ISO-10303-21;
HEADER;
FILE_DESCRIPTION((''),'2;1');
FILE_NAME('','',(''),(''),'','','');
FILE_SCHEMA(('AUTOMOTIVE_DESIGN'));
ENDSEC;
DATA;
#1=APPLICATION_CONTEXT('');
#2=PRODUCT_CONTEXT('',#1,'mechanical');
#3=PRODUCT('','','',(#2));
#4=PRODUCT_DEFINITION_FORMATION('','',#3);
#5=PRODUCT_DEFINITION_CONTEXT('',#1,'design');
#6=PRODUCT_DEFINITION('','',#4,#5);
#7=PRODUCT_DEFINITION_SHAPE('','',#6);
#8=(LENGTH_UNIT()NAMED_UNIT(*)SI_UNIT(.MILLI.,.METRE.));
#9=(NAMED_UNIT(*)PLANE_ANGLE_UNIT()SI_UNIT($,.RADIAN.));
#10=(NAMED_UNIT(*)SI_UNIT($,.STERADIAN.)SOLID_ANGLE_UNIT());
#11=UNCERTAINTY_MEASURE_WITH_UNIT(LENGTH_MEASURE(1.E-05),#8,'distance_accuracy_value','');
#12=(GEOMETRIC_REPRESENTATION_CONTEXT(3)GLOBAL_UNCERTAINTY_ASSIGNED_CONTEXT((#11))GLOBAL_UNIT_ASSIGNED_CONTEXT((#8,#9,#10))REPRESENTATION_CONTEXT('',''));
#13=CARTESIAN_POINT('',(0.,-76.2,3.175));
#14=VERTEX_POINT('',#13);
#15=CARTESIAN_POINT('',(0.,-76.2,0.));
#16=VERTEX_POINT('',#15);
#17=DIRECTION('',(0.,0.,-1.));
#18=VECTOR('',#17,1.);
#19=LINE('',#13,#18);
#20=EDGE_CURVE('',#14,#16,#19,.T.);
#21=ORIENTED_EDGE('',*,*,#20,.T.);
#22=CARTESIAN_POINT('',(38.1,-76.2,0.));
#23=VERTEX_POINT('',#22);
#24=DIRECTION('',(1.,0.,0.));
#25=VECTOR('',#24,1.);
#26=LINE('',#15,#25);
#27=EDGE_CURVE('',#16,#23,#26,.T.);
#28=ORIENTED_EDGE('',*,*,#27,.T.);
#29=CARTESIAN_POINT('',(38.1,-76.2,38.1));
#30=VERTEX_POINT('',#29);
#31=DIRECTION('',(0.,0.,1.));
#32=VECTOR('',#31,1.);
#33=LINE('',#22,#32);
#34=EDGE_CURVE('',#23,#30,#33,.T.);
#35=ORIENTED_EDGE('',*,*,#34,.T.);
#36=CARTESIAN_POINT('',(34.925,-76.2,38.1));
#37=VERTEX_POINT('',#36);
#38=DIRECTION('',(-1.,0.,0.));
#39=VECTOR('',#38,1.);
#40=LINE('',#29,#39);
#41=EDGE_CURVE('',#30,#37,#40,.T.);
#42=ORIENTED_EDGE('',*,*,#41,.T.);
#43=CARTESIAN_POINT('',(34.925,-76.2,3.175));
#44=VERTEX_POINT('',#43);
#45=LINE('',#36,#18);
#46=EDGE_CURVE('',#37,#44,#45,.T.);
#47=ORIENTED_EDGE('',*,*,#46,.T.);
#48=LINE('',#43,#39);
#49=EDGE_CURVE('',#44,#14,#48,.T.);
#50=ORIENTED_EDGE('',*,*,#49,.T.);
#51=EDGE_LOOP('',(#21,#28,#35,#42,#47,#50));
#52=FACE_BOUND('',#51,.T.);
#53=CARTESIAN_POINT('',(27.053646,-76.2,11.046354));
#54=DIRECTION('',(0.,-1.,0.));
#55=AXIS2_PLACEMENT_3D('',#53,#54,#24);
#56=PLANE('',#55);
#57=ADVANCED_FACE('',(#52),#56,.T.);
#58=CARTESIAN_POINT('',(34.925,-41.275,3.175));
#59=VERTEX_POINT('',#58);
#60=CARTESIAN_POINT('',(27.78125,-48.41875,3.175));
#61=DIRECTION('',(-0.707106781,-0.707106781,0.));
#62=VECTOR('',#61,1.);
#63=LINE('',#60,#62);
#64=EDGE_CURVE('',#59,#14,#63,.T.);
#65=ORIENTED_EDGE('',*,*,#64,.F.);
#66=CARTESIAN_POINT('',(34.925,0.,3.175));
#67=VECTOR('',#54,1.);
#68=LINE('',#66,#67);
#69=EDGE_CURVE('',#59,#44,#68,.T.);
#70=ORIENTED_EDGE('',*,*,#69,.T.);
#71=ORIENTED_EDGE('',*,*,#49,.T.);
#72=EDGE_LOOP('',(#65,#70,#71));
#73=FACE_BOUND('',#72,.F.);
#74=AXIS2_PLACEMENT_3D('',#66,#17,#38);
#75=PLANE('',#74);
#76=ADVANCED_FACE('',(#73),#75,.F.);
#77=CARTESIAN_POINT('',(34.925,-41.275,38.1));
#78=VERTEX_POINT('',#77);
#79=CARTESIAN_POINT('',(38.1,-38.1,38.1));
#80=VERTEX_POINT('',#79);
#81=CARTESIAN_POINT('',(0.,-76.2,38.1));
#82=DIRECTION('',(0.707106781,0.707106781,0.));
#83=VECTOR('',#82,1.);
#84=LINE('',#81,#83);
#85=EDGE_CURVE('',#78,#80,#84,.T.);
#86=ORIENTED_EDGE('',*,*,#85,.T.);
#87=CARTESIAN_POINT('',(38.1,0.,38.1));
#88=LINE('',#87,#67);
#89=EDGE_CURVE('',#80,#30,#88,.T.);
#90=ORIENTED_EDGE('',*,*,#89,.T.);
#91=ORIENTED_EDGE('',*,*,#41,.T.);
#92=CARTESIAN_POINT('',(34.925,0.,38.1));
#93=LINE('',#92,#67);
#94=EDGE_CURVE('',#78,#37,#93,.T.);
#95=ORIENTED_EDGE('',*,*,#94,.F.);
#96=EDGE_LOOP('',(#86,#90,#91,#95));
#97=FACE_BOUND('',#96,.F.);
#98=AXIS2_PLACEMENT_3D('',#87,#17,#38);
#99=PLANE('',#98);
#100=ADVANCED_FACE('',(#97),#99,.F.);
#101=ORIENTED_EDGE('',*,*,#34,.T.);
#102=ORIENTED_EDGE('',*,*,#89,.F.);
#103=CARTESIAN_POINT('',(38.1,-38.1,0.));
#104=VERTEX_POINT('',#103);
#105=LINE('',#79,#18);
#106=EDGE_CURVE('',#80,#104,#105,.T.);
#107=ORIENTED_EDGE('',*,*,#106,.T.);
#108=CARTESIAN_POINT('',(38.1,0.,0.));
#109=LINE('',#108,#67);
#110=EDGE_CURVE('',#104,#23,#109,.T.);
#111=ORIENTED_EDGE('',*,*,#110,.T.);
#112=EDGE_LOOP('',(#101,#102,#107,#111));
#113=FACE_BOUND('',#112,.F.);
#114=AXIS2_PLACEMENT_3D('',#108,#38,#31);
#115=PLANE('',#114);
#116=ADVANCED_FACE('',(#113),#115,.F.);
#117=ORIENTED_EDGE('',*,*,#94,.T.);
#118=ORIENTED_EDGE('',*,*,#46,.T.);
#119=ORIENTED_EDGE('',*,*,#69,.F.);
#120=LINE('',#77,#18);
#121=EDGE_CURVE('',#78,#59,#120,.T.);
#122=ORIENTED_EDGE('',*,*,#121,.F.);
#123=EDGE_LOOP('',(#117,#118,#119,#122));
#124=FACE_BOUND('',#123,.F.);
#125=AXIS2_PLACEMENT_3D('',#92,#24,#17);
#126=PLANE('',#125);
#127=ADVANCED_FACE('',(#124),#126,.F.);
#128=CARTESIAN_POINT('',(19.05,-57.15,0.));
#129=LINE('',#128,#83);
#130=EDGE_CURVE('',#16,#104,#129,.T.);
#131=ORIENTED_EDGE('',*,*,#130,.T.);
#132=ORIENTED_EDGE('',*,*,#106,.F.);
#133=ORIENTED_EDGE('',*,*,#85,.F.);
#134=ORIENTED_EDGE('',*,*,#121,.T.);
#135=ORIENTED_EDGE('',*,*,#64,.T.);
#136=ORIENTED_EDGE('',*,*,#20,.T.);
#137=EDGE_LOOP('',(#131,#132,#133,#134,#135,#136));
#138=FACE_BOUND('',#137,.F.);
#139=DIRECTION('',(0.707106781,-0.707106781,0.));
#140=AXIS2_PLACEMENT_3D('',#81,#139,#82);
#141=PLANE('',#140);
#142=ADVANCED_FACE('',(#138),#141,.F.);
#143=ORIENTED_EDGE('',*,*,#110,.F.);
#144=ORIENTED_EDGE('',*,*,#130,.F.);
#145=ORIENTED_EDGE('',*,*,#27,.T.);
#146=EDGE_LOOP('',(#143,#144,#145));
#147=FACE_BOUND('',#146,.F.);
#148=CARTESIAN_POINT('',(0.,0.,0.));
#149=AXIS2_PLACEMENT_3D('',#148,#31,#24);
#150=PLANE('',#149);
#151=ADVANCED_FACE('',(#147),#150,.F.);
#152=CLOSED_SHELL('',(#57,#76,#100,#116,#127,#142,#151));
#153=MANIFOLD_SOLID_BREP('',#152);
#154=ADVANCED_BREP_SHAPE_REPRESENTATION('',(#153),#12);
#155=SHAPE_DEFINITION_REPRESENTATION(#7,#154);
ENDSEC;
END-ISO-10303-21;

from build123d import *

# Parameters (mm, degrees)
F1_DEPTH = 76.2
F3_DEPTH = 38.101


# Not quite as in the source:
# - a feature names something its author has since deleted; it is built from what else it names


with BuildPart() as f1:
    # F0 (on Front) → F1 (new body)
    with BuildSketch(Plane.XZ):
        Polygon((0, 3.175), (0, 0), (38.1, 0), (38.1, 38.1), (34.925, 38.1), (34.925, 3.175), align=None)
    extrude(amount=F1_DEPTH)

    # F2 (on face) → F3 (cut, through all)
    with BuildSketch(Plane.XY.offset(38.1)):
        Polygon((34.925, -41.275), (34.925, 0), (0, 0), (0, -76.2), align=None)
        Polygon((38.1, 0), (34.925, 0), (34.925, -41.275), (38.1, -38.1), align=None)
    extrude(amount=-F3_DEPTH, mode=Mode.SUBTRACT)


solid = f1.part
